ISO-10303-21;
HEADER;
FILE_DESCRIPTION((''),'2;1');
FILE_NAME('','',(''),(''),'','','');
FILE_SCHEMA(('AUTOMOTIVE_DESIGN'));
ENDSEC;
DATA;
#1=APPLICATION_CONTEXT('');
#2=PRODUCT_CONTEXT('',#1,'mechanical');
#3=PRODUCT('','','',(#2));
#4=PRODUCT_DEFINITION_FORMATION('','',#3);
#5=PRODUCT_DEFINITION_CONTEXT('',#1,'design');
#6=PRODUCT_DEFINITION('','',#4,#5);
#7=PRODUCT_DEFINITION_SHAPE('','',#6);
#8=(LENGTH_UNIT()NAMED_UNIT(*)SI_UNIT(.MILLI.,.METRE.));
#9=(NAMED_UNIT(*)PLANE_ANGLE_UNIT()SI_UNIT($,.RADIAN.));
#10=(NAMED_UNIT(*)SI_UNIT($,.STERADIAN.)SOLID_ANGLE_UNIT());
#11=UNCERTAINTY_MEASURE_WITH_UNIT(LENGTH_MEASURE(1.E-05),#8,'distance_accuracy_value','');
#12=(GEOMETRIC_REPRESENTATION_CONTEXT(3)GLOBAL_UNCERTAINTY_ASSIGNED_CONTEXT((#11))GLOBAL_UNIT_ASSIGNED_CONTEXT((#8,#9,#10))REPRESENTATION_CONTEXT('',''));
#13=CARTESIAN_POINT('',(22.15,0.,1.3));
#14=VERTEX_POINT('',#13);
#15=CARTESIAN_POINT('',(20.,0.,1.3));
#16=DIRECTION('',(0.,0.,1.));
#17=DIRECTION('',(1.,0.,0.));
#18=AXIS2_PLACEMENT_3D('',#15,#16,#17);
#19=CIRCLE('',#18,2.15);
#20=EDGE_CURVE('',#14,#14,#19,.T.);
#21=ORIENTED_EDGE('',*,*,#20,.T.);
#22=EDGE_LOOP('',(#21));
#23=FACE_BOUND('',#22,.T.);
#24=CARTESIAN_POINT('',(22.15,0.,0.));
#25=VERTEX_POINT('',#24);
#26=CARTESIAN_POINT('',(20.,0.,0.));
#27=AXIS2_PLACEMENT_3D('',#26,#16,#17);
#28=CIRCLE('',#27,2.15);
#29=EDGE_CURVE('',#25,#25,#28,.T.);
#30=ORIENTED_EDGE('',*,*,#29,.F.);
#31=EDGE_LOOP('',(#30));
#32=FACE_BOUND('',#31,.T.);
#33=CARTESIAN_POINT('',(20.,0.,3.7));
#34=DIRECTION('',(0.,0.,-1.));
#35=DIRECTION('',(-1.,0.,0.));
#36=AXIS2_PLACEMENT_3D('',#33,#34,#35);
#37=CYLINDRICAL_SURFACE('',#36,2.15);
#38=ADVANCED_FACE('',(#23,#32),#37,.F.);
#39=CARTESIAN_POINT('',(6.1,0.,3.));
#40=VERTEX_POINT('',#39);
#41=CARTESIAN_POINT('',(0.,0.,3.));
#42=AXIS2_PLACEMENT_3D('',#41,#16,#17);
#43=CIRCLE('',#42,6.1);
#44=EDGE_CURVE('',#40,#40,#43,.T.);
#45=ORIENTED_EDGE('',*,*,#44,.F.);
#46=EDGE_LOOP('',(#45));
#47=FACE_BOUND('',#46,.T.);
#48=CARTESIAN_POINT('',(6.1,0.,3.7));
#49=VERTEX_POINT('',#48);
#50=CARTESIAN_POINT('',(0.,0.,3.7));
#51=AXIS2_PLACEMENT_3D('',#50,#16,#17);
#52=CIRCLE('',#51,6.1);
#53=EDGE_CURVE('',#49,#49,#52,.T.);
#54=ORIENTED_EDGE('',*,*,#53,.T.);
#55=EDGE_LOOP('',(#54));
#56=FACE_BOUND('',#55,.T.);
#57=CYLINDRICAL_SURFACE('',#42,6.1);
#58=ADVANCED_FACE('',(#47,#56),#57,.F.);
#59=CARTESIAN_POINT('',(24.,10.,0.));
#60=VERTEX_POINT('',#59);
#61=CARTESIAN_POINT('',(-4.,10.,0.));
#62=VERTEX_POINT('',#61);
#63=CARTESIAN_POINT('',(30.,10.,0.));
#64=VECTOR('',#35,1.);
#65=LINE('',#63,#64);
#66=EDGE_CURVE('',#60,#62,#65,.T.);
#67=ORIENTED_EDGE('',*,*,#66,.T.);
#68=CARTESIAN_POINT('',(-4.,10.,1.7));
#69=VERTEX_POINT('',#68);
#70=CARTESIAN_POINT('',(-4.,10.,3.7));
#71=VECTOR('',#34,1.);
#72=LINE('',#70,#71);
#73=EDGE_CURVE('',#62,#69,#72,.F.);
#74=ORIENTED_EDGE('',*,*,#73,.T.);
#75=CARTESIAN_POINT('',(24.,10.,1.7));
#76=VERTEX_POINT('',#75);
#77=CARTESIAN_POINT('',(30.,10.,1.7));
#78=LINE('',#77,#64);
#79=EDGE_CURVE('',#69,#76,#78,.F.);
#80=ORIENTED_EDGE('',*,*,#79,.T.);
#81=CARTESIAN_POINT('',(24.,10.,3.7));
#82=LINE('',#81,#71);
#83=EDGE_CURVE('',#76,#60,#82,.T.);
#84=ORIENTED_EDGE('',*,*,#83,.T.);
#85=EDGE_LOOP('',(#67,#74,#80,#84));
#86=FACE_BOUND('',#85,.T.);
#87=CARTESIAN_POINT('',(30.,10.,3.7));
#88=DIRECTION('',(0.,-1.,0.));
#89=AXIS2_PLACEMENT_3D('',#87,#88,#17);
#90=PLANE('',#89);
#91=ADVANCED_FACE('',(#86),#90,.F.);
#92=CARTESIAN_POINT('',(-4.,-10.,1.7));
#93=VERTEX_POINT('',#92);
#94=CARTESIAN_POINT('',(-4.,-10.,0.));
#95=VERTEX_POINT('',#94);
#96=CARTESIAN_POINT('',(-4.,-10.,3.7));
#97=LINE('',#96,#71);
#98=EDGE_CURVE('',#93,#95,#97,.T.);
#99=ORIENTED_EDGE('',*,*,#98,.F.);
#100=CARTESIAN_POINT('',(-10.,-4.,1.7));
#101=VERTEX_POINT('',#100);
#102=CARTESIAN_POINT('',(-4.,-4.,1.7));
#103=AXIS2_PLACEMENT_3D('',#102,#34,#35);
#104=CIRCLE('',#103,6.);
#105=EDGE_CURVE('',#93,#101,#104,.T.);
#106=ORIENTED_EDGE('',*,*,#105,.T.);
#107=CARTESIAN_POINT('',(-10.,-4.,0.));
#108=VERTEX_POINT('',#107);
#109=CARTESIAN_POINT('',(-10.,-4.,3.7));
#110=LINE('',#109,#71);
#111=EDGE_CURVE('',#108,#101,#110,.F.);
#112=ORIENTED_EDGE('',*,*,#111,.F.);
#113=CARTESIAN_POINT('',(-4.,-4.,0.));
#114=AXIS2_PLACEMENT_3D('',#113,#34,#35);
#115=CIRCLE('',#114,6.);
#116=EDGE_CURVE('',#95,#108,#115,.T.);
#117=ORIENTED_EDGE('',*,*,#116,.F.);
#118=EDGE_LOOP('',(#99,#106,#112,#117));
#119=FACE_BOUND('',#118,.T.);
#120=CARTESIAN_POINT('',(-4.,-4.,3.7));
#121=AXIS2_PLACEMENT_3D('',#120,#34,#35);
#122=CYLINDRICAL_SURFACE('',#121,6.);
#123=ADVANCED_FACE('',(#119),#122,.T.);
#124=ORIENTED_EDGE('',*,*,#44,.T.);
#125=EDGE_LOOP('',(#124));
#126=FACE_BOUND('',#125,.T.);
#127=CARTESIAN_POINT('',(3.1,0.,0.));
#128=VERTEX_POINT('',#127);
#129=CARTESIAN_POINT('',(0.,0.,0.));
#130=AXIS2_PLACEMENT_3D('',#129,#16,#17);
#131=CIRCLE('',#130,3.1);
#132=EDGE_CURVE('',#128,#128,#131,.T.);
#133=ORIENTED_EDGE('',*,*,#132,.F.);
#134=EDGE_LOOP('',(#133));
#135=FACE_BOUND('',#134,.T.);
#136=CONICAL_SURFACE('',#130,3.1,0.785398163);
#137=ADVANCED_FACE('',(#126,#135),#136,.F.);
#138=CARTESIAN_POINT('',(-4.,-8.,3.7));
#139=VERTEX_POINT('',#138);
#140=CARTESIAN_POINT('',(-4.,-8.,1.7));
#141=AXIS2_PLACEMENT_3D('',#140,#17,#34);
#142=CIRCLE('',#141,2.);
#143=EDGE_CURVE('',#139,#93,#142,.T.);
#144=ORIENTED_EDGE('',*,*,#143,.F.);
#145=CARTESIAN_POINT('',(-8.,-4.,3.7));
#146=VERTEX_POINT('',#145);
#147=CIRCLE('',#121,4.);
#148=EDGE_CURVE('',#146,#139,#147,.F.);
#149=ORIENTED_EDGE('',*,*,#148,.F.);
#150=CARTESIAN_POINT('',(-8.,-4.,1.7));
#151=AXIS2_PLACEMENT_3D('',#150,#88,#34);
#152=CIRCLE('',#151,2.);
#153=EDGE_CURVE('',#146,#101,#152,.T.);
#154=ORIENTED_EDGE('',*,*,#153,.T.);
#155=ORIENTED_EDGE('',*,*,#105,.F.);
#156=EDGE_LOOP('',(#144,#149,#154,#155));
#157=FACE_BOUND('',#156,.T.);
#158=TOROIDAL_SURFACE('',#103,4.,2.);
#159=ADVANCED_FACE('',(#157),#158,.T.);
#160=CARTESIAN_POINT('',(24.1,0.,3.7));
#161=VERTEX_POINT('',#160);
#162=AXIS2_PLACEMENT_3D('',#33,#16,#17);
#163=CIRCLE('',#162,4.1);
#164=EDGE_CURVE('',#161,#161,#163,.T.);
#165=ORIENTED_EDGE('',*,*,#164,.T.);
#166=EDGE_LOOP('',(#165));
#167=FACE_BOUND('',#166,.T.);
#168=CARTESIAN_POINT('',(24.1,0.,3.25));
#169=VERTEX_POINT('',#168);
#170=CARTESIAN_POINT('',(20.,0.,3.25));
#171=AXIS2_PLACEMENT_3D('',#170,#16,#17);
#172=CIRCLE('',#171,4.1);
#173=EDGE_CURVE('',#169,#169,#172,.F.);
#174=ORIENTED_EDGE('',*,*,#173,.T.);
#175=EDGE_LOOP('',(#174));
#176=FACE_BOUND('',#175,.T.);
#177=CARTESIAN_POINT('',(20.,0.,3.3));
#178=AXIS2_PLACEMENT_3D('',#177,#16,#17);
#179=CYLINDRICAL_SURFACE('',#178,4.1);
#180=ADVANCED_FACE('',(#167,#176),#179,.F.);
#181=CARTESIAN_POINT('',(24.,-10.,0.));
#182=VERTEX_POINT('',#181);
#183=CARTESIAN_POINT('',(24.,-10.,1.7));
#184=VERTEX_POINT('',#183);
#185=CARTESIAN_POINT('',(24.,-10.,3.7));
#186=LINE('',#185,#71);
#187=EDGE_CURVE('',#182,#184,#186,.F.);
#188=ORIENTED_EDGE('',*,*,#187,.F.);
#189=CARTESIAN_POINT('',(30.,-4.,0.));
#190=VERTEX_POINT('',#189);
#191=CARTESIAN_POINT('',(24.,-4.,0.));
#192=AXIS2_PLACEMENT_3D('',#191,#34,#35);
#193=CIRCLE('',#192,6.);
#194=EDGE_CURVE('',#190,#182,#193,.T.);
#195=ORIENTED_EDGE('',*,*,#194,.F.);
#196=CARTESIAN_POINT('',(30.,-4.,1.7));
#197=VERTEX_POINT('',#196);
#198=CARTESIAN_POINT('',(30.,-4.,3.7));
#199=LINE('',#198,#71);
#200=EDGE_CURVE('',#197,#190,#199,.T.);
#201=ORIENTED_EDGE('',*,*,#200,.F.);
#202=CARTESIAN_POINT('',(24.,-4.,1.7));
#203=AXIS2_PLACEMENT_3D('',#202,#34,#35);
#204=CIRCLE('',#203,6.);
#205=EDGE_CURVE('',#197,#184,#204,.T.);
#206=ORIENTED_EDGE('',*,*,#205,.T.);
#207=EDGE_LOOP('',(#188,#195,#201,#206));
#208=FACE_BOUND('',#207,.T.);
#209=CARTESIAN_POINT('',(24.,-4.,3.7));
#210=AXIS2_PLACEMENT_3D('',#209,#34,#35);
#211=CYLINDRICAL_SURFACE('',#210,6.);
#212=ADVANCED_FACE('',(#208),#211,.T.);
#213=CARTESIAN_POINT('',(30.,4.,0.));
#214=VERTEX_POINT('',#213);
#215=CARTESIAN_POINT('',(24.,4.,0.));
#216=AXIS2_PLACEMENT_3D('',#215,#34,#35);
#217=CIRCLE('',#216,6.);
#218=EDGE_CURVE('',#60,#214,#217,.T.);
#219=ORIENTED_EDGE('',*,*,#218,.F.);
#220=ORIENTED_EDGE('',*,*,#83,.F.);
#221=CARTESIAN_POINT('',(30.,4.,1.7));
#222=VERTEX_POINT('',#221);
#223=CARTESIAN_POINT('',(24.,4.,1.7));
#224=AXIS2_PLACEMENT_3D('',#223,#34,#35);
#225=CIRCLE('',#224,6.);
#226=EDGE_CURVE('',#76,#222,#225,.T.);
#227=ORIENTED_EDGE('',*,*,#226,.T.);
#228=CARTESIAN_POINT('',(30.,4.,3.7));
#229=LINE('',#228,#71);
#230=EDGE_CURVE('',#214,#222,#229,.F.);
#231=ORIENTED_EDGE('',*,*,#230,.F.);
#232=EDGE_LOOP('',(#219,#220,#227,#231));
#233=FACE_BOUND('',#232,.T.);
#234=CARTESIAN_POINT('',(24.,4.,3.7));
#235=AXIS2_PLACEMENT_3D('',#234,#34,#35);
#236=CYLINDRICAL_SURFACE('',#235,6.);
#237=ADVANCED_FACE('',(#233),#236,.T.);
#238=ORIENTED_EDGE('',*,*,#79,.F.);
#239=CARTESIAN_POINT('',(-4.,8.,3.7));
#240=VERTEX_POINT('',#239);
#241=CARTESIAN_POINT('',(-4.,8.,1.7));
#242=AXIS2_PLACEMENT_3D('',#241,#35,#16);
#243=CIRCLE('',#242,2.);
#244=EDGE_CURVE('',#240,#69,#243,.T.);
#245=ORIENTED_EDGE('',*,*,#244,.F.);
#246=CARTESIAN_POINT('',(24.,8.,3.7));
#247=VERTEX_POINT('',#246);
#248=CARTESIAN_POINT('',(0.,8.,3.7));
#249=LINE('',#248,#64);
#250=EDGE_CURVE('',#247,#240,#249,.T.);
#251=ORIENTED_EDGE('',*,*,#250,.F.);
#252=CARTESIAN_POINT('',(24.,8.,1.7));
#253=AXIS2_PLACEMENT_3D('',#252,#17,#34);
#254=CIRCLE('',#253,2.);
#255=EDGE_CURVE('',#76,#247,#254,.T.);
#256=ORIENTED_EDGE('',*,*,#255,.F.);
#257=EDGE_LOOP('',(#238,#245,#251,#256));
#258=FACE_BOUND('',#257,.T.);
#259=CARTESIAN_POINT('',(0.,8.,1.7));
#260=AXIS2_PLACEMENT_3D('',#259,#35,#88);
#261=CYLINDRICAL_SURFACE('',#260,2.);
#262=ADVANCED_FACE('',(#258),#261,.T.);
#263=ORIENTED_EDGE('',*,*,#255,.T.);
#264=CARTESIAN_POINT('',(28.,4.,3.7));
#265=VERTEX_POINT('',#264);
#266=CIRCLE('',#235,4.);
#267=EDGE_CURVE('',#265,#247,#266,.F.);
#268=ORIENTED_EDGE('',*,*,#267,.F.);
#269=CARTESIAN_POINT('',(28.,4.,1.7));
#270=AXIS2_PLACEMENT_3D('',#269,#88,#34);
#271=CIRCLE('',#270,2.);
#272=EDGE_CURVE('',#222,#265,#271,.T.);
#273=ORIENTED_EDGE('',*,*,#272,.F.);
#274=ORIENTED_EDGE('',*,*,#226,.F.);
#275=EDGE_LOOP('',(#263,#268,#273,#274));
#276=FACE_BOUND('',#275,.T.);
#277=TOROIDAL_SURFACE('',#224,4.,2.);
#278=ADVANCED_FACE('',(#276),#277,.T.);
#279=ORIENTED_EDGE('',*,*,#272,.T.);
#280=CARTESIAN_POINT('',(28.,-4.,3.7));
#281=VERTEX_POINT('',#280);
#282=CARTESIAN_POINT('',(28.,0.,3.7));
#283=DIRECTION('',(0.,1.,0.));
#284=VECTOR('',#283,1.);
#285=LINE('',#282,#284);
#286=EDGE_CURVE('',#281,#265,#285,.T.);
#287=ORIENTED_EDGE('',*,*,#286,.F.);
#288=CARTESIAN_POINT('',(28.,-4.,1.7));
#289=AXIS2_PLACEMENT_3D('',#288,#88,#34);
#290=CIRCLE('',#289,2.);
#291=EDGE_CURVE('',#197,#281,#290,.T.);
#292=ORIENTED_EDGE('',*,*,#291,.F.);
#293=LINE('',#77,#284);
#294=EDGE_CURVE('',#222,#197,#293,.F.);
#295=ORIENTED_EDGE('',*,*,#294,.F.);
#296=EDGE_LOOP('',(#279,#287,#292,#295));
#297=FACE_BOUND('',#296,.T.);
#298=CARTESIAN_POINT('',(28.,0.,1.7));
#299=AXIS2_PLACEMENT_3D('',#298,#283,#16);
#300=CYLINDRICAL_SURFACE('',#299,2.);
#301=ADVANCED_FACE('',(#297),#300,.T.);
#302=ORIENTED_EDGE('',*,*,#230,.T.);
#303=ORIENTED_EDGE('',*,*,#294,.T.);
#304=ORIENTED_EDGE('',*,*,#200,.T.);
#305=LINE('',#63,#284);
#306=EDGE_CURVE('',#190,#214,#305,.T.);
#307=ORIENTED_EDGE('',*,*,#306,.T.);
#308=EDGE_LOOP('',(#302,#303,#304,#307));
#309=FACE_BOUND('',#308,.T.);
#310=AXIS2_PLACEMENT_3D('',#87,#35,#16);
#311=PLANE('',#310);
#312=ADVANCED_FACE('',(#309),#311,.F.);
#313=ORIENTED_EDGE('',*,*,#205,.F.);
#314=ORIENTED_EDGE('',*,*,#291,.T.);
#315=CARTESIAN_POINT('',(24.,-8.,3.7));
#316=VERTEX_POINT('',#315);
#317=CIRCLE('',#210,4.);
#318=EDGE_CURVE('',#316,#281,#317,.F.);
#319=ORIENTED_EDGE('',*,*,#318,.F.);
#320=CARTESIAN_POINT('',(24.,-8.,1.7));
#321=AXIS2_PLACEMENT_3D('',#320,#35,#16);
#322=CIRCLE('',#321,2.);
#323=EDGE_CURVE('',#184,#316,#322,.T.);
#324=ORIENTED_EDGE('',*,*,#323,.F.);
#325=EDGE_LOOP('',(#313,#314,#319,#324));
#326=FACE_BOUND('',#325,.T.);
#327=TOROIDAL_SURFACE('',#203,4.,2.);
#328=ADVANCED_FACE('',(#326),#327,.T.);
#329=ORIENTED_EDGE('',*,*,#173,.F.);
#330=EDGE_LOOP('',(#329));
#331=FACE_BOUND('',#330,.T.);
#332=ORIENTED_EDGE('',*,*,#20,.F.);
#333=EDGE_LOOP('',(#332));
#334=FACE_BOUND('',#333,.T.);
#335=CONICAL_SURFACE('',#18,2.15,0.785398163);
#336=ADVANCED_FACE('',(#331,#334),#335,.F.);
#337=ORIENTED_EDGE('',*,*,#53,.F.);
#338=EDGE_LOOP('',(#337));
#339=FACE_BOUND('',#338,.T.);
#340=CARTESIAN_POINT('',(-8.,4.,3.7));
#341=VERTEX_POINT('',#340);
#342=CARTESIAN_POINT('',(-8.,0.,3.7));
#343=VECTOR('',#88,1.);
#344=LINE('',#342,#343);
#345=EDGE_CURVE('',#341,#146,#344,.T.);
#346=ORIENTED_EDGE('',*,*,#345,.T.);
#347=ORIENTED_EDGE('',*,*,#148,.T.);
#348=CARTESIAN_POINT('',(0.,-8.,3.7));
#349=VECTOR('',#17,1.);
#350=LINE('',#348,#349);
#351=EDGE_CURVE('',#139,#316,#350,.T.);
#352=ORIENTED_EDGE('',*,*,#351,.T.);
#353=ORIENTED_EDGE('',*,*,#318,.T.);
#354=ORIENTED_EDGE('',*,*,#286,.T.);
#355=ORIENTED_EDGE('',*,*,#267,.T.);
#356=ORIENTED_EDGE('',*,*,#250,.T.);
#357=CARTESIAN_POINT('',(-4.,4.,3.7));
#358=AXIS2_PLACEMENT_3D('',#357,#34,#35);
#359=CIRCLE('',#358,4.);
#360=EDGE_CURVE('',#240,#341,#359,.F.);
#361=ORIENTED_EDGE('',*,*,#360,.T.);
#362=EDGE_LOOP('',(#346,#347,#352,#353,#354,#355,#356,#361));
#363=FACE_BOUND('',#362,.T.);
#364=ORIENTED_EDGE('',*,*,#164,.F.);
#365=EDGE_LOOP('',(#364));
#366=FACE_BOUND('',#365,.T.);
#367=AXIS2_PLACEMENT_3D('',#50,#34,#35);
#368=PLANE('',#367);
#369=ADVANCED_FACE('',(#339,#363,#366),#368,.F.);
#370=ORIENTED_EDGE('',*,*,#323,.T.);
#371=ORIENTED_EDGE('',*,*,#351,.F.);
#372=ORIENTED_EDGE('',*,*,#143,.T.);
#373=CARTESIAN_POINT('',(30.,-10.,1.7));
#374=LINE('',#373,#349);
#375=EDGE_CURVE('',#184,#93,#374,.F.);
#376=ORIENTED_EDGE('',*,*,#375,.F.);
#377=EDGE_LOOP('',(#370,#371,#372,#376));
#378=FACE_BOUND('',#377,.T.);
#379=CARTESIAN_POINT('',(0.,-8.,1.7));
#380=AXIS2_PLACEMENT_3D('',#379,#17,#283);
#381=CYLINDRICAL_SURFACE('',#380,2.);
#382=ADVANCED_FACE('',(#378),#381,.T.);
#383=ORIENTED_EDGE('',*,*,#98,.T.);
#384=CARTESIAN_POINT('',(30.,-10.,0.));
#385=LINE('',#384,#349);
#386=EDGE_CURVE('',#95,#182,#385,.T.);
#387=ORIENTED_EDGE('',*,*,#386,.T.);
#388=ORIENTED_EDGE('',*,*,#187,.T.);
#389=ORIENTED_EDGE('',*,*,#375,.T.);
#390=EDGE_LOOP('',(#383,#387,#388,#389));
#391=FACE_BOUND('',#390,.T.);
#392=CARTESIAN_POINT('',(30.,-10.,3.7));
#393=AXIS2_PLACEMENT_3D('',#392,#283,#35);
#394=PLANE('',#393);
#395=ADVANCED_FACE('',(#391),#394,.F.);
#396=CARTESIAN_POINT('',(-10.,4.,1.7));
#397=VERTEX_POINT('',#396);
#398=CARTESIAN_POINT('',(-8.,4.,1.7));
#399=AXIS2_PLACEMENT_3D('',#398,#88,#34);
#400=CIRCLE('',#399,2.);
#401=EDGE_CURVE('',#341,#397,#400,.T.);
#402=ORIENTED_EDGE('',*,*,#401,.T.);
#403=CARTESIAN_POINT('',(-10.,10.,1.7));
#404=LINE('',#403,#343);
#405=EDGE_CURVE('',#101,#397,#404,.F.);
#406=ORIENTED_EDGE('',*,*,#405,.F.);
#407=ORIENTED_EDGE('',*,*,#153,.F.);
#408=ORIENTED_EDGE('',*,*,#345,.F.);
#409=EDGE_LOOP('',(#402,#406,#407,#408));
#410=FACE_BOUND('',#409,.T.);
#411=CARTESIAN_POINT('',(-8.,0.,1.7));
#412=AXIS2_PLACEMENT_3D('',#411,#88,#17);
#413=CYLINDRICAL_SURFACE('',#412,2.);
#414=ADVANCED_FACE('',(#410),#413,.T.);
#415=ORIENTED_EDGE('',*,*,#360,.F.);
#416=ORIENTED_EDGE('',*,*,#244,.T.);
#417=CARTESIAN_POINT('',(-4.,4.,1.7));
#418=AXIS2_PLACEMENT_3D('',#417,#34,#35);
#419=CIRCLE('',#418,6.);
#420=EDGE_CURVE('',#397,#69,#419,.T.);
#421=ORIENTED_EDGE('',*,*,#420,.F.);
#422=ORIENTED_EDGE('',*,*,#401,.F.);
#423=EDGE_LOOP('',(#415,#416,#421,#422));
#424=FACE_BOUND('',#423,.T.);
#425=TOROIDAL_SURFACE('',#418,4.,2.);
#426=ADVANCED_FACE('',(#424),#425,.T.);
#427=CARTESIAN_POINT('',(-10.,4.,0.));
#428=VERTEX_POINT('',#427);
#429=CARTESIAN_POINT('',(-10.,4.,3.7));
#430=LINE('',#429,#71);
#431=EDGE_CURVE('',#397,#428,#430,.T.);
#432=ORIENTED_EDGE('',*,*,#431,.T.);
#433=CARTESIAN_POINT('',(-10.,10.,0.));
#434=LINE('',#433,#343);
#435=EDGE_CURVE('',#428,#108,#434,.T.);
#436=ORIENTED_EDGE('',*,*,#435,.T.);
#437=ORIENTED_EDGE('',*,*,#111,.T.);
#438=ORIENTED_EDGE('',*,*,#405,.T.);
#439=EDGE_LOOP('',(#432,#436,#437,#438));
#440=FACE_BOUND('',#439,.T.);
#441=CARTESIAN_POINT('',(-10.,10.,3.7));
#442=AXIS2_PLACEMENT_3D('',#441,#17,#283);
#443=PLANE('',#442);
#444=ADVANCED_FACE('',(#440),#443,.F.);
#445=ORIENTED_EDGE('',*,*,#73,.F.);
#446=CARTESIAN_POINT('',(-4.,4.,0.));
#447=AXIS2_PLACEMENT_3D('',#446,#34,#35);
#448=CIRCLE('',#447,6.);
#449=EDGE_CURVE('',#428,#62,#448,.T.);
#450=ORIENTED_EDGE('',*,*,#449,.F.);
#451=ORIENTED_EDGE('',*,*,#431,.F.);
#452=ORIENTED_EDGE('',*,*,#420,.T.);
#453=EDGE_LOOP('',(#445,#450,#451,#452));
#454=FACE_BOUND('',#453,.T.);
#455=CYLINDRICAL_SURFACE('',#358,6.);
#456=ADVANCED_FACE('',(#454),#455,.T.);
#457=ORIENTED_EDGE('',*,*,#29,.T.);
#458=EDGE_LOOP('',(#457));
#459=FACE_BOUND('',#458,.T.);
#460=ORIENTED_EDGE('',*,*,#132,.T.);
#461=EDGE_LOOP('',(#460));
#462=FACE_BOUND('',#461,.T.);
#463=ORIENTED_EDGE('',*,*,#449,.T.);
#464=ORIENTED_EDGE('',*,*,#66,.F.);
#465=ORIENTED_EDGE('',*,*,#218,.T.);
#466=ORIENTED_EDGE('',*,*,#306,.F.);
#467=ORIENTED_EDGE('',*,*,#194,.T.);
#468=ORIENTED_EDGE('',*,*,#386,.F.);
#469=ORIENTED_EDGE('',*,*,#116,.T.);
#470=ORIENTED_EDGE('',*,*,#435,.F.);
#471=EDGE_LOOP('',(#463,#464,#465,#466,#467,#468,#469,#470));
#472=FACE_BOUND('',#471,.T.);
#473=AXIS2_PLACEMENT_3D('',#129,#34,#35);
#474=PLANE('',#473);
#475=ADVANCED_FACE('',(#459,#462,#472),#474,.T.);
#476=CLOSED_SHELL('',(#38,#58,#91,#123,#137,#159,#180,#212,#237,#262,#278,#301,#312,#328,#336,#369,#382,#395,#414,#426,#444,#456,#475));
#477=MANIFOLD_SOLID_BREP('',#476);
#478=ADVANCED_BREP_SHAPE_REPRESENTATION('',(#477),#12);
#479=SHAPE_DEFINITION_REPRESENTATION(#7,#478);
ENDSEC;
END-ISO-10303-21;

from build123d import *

# Parameters (mm, degrees)
SKETCH1_W           = 40
SKETCH1_H           = 20
SKETCH1_R           = 3.1
SKETCH1_R_2         = 2.15
BOSS_EXTRUDE1_DEPTH = 3.7
SKETCH2_R           = 6.1
CUT_EXTRUDE1_DEPTH  = 0.7
CHAMFER1_SIZE       = 3
SKETCH3_R           = 4.1
CUT_EXTRUDE2_DEPTH  = 0.4
CHAMFER2_SIZE       = 2
FILLET1_R           = 6
FILLET2_R           = 2


# Some blends are built 0.0001 mm under size
with BuildPart() as part:
    # Sketch1 → Boss-Extrude1 (new body)
    with BuildSketch(Plane.XY):
        with Locations((10, 0)):
            Rectangle(SKETCH1_W, SKETCH1_H)
        Circle(SKETCH1_R, mode=Mode.SUBTRACT)
        with Locations((20, 0)):
            Circle(SKETCH1_R_2, mode=Mode.SUBTRACT)
    extrude(amount=BOSS_EXTRUDE1_DEPTH)

    # Sketch2 → Cut-Extrude1 (cut)
    with BuildSketch(Plane.XY.offset(3.7)):
        Circle(SKETCH2_R)
    extrude(amount=-CUT_EXTRUDE1_DEPTH, mode=Mode.SUBTRACT)

    # Chamfer1
    chamfer1_edges = [part.edges().sort_by_distance(p)[0] for p in [
        (-3.1, 0, 3),
    ]]
    chamfer(chamfer1_edges, length=CHAMFER1_SIZE - 0.0001)  # a hair under: the kernel refuses the full size

    # Sketch3 → Cut-Extrude2 (cut)
    with BuildSketch(Plane.XY.offset(3.7)):
        with Locations((20, 0)):
            Circle(SKETCH3_R)
    extrude(amount=-CUT_EXTRUDE2_DEPTH, mode=Mode.SUBTRACT)

    # Chamfer2
    # the kernel refuses this chamfer: 2 mm, written as the material it takes off along each edge
    with BuildSketch(Plane(origin=(20, 0, 3.3), x_dir=(1, 0, 0), z_dir=(0, 1, 0))) as chamfer2_piece_1_section:
        Polygon((2.15, CHAMFER2_SIZE), (2.15 + CHAMFER2_SIZE, 0), (2.15, 0), align=None)
    chamfer2_piece_1 = revolve(axis=Axis((20, 0, 3.3), (0, 0, -1)), mode=Mode.PRIVATE)
    chamfer2_piece_1 = chamfer2_piece_1 & Plane(origin=(20, 0, 2.270614155), x_dir=(1, 0, 0), z_dir=(0, 0, 1)) * Cylinder(4.1, 17, mode=Mode.PRIVATE)
    add(chamfer2_piece_1, mode=Mode.SUBTRACT)

    # Fillet1
    fillet1_edges = [part.edges().sort_by_distance(p)[0] for p in [
        (-10, 10, 1.85),
        (30, 10, 1.85),
        (30, -10, 1.85),
        (-10, -10, 1.85),
    ]]
    fillet(fillet1_edges, radius=FILLET1_R)

    # Fillet2
    fillet2_edges = [part.edges().sort_by_distance(p)[0] for p in [
        (30, 0, 3.7),
        (10, -10, 3.7),
        (-10, 0, 3.7),
        (10, 10, 3.7),
        (-8.242640687, 8.242640687, 3.7),
        (28.242640687, 8.242640687, 3.7),
        (-8.242640687, -8.242640687, 3.7),
        (28.242640687, -8.242640687, 3.7),
    ]]
    fillet(fillet2_edges, radius=FILLET2_R)


solid = part.part
